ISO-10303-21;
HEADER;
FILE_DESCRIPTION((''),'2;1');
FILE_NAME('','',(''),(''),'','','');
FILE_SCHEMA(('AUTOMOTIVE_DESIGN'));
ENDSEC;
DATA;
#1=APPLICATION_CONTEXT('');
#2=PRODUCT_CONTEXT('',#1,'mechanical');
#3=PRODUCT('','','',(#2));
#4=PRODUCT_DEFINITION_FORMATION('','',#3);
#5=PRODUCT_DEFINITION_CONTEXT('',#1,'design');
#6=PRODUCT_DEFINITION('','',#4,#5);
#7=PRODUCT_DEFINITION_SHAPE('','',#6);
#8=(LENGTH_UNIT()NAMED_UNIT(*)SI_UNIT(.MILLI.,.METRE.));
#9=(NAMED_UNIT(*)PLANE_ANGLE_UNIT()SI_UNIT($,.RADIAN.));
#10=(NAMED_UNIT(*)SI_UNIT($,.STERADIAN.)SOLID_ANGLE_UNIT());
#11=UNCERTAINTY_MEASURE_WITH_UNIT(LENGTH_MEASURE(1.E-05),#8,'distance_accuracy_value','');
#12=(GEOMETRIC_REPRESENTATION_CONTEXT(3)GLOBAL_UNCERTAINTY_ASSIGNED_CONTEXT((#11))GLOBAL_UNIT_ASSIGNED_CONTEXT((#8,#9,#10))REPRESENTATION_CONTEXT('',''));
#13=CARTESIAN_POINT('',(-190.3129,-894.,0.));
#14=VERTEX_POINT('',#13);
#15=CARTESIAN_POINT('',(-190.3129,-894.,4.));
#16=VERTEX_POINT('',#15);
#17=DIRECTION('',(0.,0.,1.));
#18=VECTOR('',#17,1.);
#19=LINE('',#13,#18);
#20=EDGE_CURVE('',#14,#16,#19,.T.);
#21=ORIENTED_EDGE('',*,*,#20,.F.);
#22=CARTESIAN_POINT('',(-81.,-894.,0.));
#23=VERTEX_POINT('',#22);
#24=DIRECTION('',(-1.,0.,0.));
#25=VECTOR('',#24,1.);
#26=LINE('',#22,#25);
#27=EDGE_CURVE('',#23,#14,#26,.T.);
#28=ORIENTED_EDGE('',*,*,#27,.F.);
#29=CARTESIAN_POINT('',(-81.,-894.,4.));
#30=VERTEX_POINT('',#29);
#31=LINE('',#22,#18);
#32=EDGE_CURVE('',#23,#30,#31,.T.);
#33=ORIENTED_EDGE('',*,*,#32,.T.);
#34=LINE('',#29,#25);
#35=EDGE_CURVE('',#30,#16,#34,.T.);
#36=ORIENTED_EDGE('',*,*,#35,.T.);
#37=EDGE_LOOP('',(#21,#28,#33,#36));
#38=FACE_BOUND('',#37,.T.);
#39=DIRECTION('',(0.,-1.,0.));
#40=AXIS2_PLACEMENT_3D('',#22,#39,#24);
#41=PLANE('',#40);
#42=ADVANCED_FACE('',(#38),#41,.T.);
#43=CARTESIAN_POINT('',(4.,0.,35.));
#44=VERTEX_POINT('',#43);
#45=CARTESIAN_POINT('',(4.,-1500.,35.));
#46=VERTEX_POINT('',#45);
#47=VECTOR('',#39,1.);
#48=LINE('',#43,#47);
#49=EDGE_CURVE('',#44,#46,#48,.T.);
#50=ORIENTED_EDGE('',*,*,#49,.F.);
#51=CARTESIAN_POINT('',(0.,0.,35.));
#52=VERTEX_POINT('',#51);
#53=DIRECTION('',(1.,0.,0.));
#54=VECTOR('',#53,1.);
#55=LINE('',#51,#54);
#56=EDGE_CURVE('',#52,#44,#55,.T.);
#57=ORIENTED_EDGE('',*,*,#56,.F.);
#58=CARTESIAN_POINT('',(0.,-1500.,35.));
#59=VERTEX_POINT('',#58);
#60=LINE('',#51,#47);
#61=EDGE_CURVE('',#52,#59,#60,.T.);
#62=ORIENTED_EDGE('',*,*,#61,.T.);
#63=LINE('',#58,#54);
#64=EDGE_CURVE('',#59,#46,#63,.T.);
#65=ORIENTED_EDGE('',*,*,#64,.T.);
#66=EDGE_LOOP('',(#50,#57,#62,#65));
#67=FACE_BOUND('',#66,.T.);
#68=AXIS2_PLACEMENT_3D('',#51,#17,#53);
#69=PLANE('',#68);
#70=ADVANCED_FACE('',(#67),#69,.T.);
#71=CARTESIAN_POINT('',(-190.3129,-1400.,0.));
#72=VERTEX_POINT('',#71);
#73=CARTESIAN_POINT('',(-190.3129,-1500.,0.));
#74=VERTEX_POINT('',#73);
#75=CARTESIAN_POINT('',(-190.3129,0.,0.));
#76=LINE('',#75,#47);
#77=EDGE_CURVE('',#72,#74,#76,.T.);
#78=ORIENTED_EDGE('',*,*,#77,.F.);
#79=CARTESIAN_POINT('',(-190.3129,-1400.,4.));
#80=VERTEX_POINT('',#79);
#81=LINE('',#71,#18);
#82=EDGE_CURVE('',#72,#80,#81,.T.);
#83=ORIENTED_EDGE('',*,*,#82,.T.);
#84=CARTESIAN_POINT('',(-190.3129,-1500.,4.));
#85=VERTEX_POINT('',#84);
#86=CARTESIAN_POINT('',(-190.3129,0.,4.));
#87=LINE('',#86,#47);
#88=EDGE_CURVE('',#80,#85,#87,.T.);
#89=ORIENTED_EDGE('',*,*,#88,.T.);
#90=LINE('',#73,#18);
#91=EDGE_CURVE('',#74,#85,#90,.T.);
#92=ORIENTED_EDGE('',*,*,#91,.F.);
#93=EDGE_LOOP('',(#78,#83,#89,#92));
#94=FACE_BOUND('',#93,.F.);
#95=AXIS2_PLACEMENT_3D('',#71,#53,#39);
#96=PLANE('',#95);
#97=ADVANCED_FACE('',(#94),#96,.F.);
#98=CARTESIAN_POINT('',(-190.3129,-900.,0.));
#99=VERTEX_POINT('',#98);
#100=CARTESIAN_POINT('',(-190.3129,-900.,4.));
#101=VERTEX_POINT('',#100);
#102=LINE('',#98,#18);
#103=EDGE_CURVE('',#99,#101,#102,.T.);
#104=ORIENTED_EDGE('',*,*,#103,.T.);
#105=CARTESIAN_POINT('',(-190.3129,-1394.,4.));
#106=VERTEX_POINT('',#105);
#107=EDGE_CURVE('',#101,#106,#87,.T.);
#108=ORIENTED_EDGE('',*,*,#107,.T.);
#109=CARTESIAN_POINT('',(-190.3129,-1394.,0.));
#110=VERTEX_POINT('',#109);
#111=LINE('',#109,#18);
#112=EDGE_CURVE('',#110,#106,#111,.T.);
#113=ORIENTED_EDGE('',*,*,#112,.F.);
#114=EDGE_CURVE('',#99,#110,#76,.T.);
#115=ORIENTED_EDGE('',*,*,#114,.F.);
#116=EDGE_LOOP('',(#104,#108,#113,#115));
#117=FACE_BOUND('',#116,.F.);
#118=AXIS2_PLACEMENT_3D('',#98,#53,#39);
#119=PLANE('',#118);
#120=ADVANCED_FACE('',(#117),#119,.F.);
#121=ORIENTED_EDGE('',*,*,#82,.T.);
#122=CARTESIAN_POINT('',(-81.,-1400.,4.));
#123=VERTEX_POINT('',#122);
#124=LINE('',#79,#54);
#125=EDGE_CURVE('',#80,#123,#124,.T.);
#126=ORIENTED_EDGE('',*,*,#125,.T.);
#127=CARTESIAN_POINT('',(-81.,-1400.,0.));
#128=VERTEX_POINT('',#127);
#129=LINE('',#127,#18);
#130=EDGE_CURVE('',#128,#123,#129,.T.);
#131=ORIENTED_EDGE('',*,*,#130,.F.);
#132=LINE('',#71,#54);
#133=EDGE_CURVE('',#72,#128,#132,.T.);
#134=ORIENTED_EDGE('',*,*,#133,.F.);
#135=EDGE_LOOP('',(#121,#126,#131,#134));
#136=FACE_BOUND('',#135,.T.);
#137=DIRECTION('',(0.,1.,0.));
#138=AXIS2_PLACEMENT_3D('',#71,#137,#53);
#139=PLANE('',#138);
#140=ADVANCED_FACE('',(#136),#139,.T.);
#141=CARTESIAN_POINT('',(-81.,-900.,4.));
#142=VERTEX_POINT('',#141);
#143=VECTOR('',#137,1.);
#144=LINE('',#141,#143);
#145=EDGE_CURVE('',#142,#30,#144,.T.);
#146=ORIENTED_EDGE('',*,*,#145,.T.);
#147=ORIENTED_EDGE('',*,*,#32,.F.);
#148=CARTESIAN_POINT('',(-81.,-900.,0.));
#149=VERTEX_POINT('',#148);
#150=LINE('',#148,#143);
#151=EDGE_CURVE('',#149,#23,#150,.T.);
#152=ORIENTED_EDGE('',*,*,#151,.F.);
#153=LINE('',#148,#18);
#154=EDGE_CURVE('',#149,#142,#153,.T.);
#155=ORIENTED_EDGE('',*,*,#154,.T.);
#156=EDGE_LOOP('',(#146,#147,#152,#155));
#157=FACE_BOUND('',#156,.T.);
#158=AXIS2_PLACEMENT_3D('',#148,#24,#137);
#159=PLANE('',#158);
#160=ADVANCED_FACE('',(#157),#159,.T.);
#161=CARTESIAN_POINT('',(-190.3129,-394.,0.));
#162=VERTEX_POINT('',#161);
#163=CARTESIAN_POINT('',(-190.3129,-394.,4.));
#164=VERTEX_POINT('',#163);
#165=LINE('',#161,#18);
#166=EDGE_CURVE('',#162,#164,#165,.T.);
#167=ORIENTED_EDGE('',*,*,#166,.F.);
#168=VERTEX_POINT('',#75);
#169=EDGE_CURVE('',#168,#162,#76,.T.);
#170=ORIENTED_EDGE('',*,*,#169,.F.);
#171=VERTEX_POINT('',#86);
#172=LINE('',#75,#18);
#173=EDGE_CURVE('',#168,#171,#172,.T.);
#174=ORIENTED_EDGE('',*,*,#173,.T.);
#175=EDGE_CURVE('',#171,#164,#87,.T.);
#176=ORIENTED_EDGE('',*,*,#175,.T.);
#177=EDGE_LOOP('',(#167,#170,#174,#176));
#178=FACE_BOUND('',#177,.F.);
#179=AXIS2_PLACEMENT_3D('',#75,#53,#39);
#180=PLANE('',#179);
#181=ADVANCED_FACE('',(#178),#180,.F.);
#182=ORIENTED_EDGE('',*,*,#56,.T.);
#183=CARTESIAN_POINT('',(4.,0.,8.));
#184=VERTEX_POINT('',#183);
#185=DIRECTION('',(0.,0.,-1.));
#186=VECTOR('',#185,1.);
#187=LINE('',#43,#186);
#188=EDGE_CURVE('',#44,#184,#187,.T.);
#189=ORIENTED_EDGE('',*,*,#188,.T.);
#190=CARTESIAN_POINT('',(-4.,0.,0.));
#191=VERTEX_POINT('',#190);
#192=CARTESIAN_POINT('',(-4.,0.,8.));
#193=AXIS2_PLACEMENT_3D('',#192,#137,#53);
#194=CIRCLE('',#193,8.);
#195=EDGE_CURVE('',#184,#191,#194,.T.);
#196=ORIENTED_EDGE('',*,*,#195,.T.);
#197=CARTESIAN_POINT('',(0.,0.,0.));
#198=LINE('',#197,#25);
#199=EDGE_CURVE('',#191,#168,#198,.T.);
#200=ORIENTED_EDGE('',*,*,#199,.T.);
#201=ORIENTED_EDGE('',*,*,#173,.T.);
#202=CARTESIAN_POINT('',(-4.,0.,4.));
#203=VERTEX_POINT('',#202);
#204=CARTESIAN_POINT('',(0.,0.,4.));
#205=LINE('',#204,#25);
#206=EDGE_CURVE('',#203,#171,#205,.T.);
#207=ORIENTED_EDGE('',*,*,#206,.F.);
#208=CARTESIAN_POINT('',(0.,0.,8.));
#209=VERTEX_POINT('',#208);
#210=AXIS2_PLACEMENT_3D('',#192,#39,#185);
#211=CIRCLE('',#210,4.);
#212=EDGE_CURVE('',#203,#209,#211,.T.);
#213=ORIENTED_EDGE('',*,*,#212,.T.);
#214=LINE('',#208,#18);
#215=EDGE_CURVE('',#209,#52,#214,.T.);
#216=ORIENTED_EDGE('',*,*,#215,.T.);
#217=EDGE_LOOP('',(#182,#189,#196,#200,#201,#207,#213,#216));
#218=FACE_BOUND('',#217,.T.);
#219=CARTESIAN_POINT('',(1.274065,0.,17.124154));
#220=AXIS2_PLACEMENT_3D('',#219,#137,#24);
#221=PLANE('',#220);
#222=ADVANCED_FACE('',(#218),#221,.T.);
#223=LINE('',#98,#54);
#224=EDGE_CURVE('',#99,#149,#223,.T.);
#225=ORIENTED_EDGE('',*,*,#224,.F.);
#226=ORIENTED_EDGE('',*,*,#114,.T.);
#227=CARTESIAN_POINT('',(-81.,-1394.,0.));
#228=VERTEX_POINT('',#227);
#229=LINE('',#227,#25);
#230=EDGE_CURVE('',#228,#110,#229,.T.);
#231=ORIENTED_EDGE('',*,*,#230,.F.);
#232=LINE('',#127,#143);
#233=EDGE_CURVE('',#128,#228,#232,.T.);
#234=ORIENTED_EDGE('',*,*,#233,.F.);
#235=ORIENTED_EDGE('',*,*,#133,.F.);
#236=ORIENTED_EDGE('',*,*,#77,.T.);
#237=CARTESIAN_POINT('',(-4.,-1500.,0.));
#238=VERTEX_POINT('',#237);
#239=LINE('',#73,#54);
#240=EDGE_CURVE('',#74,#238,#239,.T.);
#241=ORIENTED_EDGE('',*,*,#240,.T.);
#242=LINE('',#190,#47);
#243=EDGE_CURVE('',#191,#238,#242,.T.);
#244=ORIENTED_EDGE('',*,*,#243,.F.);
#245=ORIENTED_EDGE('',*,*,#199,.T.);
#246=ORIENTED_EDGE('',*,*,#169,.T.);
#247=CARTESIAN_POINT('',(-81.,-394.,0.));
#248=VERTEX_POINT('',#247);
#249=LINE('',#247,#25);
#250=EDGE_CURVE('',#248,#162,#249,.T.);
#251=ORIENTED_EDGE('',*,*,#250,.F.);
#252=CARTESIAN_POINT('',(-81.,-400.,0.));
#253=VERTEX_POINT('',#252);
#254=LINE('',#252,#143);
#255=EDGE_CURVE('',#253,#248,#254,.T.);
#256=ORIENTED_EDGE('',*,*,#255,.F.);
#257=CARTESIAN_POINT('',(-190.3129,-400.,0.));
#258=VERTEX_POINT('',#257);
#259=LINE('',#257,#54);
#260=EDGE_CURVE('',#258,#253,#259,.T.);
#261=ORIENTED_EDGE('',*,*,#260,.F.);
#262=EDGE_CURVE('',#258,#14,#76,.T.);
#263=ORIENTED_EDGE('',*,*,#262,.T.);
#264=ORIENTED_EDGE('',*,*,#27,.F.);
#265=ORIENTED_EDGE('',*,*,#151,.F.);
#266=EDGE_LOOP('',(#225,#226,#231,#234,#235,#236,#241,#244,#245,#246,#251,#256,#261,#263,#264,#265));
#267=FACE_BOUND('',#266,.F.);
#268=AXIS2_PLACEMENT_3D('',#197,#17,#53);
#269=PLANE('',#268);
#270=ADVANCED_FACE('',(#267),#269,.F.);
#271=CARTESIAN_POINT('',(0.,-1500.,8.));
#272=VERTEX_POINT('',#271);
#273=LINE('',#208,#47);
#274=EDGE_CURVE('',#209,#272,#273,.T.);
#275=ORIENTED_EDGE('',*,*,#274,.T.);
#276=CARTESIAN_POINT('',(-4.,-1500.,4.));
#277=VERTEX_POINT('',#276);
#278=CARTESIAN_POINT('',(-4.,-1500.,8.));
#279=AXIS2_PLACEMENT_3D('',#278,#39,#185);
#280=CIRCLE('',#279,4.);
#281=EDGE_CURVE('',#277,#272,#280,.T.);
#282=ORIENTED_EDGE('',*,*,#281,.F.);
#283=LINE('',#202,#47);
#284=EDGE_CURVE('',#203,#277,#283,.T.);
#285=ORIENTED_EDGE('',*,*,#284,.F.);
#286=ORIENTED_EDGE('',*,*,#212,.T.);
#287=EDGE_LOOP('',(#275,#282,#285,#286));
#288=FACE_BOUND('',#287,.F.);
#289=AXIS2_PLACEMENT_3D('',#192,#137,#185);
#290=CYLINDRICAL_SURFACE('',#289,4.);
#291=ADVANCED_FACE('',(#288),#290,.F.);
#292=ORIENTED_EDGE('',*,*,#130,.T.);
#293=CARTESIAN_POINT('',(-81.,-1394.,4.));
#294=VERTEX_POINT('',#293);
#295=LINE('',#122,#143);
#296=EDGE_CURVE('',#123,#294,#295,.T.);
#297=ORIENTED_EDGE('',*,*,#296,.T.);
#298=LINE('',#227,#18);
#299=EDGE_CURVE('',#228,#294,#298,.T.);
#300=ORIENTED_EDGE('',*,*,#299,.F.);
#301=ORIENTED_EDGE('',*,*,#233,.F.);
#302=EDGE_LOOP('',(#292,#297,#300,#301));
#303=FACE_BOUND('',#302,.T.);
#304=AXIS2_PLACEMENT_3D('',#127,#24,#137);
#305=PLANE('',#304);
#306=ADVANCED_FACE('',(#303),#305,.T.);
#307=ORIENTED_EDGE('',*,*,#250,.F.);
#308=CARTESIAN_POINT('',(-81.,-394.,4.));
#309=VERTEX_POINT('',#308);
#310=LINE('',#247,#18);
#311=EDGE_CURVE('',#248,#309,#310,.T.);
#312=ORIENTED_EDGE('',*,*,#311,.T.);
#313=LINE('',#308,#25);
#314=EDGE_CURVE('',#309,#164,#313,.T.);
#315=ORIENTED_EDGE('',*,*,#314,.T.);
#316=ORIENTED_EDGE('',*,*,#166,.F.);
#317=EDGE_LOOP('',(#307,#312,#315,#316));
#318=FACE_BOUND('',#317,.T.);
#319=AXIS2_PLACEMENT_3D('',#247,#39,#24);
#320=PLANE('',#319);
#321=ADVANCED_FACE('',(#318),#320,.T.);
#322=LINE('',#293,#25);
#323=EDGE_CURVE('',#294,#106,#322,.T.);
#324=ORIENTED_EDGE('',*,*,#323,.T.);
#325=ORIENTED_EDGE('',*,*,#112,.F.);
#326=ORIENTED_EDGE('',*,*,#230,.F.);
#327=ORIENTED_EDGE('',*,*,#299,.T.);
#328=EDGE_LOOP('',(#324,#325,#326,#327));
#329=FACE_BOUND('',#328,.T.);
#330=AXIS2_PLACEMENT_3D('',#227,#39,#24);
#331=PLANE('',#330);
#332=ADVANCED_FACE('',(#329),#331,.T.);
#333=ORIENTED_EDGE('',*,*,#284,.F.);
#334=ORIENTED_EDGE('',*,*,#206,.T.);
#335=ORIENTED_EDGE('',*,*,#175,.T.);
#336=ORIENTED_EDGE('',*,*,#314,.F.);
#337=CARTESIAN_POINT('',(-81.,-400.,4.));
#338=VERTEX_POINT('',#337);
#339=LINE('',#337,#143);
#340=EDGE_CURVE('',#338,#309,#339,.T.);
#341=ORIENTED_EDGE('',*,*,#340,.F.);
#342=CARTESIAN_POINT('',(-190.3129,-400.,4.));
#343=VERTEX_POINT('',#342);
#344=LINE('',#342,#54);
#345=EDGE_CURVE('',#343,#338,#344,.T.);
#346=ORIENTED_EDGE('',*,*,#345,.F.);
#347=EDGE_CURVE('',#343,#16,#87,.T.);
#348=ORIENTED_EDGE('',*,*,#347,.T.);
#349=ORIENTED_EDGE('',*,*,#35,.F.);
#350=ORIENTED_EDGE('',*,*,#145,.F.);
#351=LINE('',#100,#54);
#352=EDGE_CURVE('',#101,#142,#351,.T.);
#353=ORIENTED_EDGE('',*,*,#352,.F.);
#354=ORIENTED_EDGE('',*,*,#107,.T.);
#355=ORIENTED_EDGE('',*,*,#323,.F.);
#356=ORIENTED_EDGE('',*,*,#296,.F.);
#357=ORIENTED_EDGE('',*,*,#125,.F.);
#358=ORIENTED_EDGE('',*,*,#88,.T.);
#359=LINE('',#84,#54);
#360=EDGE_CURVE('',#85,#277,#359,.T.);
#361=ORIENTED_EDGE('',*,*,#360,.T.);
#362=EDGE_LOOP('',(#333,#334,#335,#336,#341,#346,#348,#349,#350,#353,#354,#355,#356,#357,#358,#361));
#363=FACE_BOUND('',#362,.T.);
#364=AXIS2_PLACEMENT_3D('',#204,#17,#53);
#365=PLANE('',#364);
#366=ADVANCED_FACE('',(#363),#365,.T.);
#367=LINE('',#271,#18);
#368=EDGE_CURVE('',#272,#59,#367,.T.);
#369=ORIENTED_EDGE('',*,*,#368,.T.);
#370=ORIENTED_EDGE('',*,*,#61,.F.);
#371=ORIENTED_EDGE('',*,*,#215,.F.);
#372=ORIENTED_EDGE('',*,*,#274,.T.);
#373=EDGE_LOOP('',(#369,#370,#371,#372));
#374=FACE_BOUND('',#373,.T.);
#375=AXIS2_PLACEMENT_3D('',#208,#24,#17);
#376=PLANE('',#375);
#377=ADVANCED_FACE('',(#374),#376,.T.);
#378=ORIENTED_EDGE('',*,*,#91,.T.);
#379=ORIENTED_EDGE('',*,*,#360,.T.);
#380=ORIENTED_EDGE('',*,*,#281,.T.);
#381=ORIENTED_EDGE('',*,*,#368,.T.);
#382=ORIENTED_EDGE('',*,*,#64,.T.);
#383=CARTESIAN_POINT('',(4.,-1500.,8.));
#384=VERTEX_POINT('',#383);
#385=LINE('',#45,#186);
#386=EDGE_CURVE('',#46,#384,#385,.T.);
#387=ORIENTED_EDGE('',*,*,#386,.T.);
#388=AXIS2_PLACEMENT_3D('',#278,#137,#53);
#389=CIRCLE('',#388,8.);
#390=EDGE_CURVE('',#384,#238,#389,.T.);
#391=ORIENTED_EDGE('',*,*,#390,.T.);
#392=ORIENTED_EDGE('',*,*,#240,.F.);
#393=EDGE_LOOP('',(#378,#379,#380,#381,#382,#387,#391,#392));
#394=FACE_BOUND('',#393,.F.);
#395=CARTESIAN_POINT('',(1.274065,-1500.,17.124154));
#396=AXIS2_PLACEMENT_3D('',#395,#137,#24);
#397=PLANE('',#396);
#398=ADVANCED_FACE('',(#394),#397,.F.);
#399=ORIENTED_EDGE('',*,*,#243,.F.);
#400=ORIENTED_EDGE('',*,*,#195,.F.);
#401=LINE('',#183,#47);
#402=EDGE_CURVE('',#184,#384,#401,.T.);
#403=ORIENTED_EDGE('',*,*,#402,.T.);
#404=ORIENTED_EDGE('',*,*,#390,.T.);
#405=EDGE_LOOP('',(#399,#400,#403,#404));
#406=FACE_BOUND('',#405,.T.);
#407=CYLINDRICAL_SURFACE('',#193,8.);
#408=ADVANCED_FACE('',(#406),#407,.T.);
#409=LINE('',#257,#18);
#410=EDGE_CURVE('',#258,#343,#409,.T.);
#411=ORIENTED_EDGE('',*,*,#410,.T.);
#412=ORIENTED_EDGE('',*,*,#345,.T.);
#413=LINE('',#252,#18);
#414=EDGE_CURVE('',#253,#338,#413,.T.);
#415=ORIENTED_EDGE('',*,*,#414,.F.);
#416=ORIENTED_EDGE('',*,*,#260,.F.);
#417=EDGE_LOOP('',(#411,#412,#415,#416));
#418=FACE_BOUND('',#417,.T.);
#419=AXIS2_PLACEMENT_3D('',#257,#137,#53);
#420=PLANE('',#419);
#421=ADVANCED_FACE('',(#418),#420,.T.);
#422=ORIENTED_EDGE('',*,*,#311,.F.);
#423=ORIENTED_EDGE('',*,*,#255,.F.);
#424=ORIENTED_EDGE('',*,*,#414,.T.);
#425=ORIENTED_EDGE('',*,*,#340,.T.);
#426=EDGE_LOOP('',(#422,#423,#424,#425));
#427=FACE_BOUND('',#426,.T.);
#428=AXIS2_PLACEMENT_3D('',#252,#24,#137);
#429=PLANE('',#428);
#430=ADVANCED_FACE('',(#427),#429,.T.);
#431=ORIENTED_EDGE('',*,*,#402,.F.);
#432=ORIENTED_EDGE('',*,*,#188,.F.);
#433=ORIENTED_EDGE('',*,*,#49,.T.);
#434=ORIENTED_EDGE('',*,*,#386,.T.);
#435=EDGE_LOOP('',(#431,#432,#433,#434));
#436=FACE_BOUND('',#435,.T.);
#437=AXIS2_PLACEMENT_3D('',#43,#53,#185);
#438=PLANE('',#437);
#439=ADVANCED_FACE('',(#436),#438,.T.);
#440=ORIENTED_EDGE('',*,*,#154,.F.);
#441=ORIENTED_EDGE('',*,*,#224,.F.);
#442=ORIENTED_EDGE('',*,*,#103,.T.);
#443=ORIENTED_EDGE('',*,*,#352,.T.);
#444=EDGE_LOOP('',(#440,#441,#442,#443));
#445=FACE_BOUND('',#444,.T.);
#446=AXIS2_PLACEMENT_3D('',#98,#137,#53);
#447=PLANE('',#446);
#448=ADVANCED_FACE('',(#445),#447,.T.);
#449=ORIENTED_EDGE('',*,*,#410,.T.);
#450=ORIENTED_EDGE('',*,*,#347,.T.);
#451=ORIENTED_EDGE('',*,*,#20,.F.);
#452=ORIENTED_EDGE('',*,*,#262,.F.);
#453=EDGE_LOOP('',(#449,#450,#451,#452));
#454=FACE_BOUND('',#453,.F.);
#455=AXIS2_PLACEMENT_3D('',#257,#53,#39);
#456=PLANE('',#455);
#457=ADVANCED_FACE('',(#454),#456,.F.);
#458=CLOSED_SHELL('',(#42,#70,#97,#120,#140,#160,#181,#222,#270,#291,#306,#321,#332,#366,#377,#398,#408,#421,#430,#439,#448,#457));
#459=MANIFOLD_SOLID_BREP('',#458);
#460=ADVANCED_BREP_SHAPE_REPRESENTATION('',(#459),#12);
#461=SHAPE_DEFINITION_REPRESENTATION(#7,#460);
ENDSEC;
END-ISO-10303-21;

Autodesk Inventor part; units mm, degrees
ref_plane "YZ Plane" through (0, 0, 0) normal (1, 0, 0) x (0, 1, 0)
ref_plane "XZ Plane" through (0, 0, 0) normal (0, 1, 0) x (-1, 0, 0)
ref_plane "XY Plane" through (0, 0, 0) normal (0, 0, 1) x (1, 0, 0)
sketch "Sketch1" plane through (0, 0, 0) normal (0, 0, 1) x (1, 0, 0)
  line L0 (0, 0) -> (-190.3129, 0)
  line L1 (-190.3129, 0) -> (-190.3129, -1500)
  line L2 (-190.3129, -1500) -> (0, -1500)
  line L3 (0, -1500) -> (0, 0)
  line L4 (-190.3129, -1400) -> (-81, -1400)
  line L5 (-81, -1400) -> (-81, -1394)
  line L6 (-81, -1394) -> (-190.3129, -1394)
  line L7 (-190.3129, -1394) -> (-190.3129, -1400)
  line L8 (-190.3129, -900) -> (-81, -900)
  line L9 (-81, -900) -> (-81, -894)
  line L10 (-81, -894) -> (-190.3129, -894)
  line L11 (-190.3129, -894) -> (-190.3129, -900)
  line L12 (-190.3129, -400) -> (-81, -400)
  line L13 (-81, -400) -> (-81, -394)
  line L14 (-81, -394) -> (-190.3129, -394)
  line L15 (-190.3129, -394) -> (-190.3129, -400)
  point P0 (-190.3129, -400)
  point P1 (-190.3129, -894)
  point P2 (-190.3129, -900)
  dimension "d0" = 1500
  dimension "d1" = 190.3129
  dimension "d2" = 6
  dimension "d4" = 100
  dimension "d7" = 500
  dimension "d23" = 81
extrude "Plate1" add sketch "Sketch1" along normal blind 4 contours L3 L2 L1 L4 L5 L6 L8 L9 L10 L12 L13 L14 L0
sketch "Sketch2" plane through (4, 0, 0) normal (-1, 0, 0) x (0, -1, 0)
  line L0 (1500, 0) -> (0, 0)
  line L1 (0, 0) -> (0, 35)
  line L2 (0, 35) -> (1500, 35)
  line L3 (1500, 35) -> (1500, 0)
edge flange "Flange1" height 35 angle 90 thickness 4 bend radius 4 thickness toward (-1, 0, 0) relief tear relief width 4 relief depth 2 edges at (0, -750, 4) wall of the first edge with corners at (4, -1500, 0) (4, 0, 0) (4, 0, 35) (4, -1500, 35)
bend "Bend1"
corner "Corner1"
equation "\"d1\" = стрингерглубина1"
equation "\"d12\" = Thickness"
equation "\"d13\" = BendReliefWidth"
equation "\"d14\" = BendReliefDepth"
equation "\"d15\" = MinimumRemnant"
equation "\"d16\" = TransitionRadius"
equation "\"d19\" = BendRadius"
equation "\"d20\" = CornerReliefSize"
equation "\"d21\" = GapSize"
equation "\"d22\" = JacobiRadiusSize"
equation "\"BendRadius\" = Thickness"
equation "\"BendReliefWidth\" = Thickness"
equation "\"BendReliefDepth\" = 0.5 * Thickness"
equation "\"CornerReliefSize\" = 4 * Thickness"
equation "\"MinimumRemnant\" = 2 * Thickness"
equation "\"TransitionRadius\" = BendRadius"
equation "\"JacobiRadiusSize\" = BendRadius"
equation "\"GapSize\" = Thickness"
equation "\"стрингерглубина1\" = 190.312858"
equation "\"Thickness\" = 4"
properties part number "stringer 1_CPY2"
